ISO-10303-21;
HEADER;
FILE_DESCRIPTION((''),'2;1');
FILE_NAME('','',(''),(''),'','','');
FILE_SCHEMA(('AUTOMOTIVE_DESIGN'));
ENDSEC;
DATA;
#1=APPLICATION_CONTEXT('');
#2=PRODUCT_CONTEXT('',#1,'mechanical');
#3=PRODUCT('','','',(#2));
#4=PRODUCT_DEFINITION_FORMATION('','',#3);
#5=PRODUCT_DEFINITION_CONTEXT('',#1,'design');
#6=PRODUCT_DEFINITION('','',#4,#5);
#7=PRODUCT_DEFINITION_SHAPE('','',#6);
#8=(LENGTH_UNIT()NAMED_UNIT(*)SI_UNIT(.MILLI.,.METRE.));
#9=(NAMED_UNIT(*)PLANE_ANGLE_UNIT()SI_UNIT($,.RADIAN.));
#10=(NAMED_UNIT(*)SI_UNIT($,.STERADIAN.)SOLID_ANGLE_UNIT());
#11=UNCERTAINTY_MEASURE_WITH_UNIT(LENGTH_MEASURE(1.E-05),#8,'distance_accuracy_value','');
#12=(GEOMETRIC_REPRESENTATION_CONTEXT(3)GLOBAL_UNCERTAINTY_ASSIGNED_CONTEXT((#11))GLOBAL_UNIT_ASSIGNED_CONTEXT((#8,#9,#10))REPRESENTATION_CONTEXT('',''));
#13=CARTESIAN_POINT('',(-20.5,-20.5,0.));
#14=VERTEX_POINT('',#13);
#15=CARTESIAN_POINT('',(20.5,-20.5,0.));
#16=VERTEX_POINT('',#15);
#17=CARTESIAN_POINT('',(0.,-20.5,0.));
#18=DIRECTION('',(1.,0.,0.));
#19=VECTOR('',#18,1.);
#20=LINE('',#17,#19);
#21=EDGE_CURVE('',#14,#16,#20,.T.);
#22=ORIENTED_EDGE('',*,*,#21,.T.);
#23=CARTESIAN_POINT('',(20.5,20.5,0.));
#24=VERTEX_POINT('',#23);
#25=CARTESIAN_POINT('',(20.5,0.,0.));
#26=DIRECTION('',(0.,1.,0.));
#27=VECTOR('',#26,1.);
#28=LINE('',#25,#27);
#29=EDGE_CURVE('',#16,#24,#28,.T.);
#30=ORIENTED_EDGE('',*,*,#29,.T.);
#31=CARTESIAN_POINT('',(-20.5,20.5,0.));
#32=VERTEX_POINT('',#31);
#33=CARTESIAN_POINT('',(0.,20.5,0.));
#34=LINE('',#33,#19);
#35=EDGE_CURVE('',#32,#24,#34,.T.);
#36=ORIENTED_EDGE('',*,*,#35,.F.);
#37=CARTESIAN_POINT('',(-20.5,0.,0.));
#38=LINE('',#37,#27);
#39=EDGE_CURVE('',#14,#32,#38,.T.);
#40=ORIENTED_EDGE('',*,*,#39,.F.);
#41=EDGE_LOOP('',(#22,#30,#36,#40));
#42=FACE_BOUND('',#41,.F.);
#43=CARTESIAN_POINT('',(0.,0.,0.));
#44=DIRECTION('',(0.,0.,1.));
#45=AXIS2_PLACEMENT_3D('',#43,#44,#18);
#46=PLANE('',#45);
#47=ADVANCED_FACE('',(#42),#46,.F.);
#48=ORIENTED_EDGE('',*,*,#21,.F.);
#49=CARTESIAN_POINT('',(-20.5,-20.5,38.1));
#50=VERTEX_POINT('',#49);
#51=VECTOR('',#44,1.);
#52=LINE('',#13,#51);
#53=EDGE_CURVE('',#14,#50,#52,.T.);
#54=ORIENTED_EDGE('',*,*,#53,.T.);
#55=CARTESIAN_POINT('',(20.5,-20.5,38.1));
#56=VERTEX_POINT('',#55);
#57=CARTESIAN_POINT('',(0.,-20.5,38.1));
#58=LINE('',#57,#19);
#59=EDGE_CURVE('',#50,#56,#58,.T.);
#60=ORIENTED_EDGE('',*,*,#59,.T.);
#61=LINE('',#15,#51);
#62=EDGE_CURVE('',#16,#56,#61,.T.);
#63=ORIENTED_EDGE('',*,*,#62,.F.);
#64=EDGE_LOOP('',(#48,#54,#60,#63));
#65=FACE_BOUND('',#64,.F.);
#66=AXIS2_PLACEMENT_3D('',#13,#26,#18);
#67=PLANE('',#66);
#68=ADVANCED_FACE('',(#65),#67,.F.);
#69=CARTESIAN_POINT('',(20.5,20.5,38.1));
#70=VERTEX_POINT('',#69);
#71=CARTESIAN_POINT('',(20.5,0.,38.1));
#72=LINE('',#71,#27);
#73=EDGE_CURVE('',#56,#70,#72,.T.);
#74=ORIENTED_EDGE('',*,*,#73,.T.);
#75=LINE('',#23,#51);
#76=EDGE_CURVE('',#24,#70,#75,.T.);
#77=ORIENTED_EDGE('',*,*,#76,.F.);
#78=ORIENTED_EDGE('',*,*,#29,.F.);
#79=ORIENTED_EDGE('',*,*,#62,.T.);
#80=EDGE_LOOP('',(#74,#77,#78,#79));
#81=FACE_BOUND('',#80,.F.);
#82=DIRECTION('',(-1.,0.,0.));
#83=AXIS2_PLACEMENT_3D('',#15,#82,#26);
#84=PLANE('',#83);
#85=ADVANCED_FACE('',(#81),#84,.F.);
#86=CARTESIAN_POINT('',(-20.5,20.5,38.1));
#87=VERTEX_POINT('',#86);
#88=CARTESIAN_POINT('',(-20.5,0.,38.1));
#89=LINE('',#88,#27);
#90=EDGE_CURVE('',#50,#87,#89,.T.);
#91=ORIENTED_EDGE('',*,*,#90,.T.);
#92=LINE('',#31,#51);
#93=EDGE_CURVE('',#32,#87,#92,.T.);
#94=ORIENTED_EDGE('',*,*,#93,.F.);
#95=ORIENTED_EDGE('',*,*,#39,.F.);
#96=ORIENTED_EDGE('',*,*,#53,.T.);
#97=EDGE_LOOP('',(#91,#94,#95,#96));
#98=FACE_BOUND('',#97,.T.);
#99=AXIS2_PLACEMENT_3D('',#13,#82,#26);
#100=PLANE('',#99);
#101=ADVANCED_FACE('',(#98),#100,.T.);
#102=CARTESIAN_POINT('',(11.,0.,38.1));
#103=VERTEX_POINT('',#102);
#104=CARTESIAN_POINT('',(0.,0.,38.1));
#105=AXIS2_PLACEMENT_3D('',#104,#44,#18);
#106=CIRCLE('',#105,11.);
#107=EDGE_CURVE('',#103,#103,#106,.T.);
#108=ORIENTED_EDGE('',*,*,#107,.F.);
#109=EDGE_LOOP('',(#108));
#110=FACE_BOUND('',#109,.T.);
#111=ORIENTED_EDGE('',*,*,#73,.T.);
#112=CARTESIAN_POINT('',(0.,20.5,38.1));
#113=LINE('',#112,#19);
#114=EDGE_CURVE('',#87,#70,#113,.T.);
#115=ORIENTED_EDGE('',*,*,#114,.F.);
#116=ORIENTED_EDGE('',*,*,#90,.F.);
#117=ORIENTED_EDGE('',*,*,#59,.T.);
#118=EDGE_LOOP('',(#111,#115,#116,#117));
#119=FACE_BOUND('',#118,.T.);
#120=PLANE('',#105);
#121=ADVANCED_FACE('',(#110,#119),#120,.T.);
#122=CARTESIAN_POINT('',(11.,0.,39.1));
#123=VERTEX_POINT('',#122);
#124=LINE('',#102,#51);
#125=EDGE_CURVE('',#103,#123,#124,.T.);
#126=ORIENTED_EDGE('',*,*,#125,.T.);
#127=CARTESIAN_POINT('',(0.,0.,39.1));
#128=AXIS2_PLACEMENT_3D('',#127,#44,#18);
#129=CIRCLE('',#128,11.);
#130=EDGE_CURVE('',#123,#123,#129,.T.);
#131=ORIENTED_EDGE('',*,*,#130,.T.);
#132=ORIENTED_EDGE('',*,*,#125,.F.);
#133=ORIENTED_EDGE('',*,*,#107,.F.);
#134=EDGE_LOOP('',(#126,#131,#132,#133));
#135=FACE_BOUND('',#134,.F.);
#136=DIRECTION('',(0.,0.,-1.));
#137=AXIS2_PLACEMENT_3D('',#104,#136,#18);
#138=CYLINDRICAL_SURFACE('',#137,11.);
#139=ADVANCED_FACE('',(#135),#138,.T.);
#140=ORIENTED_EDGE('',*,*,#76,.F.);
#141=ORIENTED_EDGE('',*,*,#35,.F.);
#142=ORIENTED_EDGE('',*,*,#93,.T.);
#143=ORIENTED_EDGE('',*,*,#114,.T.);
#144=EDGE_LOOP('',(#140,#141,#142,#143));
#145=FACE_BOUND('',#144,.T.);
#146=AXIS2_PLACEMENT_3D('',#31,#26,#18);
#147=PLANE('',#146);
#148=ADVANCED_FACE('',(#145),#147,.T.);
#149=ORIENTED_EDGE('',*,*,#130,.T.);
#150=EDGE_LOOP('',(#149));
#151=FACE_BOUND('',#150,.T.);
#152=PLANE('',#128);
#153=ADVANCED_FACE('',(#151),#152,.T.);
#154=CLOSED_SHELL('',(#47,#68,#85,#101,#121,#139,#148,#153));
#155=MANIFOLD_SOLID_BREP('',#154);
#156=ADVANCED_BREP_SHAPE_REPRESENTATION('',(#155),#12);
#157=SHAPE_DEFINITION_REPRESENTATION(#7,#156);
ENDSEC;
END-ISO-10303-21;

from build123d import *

# Parameters (mm, degrees)
F0_W     = 41
F0_H     = 41
F1_DEPTH = 38.1
F2_R     = 11
F3_DEPTH = 1


# Not quite as in the source:
# - the program builds the solid bodies; features that only make, move or delete a surface that nothing else refers to are left out


with BuildPart() as f1:
    # F0 (on Top) → F1 (new body)
    with BuildSketch(Plane.XY):
        Rectangle(F0_W, F0_H)
    extrude(amount=F1_DEPTH)

    # F2 (on face) → F3 (join)
    with BuildSketch(Plane.XY.offset(38.1)):
        Circle(F2_R)
    extrude(amount=F3_DEPTH)


solid = f1.part
